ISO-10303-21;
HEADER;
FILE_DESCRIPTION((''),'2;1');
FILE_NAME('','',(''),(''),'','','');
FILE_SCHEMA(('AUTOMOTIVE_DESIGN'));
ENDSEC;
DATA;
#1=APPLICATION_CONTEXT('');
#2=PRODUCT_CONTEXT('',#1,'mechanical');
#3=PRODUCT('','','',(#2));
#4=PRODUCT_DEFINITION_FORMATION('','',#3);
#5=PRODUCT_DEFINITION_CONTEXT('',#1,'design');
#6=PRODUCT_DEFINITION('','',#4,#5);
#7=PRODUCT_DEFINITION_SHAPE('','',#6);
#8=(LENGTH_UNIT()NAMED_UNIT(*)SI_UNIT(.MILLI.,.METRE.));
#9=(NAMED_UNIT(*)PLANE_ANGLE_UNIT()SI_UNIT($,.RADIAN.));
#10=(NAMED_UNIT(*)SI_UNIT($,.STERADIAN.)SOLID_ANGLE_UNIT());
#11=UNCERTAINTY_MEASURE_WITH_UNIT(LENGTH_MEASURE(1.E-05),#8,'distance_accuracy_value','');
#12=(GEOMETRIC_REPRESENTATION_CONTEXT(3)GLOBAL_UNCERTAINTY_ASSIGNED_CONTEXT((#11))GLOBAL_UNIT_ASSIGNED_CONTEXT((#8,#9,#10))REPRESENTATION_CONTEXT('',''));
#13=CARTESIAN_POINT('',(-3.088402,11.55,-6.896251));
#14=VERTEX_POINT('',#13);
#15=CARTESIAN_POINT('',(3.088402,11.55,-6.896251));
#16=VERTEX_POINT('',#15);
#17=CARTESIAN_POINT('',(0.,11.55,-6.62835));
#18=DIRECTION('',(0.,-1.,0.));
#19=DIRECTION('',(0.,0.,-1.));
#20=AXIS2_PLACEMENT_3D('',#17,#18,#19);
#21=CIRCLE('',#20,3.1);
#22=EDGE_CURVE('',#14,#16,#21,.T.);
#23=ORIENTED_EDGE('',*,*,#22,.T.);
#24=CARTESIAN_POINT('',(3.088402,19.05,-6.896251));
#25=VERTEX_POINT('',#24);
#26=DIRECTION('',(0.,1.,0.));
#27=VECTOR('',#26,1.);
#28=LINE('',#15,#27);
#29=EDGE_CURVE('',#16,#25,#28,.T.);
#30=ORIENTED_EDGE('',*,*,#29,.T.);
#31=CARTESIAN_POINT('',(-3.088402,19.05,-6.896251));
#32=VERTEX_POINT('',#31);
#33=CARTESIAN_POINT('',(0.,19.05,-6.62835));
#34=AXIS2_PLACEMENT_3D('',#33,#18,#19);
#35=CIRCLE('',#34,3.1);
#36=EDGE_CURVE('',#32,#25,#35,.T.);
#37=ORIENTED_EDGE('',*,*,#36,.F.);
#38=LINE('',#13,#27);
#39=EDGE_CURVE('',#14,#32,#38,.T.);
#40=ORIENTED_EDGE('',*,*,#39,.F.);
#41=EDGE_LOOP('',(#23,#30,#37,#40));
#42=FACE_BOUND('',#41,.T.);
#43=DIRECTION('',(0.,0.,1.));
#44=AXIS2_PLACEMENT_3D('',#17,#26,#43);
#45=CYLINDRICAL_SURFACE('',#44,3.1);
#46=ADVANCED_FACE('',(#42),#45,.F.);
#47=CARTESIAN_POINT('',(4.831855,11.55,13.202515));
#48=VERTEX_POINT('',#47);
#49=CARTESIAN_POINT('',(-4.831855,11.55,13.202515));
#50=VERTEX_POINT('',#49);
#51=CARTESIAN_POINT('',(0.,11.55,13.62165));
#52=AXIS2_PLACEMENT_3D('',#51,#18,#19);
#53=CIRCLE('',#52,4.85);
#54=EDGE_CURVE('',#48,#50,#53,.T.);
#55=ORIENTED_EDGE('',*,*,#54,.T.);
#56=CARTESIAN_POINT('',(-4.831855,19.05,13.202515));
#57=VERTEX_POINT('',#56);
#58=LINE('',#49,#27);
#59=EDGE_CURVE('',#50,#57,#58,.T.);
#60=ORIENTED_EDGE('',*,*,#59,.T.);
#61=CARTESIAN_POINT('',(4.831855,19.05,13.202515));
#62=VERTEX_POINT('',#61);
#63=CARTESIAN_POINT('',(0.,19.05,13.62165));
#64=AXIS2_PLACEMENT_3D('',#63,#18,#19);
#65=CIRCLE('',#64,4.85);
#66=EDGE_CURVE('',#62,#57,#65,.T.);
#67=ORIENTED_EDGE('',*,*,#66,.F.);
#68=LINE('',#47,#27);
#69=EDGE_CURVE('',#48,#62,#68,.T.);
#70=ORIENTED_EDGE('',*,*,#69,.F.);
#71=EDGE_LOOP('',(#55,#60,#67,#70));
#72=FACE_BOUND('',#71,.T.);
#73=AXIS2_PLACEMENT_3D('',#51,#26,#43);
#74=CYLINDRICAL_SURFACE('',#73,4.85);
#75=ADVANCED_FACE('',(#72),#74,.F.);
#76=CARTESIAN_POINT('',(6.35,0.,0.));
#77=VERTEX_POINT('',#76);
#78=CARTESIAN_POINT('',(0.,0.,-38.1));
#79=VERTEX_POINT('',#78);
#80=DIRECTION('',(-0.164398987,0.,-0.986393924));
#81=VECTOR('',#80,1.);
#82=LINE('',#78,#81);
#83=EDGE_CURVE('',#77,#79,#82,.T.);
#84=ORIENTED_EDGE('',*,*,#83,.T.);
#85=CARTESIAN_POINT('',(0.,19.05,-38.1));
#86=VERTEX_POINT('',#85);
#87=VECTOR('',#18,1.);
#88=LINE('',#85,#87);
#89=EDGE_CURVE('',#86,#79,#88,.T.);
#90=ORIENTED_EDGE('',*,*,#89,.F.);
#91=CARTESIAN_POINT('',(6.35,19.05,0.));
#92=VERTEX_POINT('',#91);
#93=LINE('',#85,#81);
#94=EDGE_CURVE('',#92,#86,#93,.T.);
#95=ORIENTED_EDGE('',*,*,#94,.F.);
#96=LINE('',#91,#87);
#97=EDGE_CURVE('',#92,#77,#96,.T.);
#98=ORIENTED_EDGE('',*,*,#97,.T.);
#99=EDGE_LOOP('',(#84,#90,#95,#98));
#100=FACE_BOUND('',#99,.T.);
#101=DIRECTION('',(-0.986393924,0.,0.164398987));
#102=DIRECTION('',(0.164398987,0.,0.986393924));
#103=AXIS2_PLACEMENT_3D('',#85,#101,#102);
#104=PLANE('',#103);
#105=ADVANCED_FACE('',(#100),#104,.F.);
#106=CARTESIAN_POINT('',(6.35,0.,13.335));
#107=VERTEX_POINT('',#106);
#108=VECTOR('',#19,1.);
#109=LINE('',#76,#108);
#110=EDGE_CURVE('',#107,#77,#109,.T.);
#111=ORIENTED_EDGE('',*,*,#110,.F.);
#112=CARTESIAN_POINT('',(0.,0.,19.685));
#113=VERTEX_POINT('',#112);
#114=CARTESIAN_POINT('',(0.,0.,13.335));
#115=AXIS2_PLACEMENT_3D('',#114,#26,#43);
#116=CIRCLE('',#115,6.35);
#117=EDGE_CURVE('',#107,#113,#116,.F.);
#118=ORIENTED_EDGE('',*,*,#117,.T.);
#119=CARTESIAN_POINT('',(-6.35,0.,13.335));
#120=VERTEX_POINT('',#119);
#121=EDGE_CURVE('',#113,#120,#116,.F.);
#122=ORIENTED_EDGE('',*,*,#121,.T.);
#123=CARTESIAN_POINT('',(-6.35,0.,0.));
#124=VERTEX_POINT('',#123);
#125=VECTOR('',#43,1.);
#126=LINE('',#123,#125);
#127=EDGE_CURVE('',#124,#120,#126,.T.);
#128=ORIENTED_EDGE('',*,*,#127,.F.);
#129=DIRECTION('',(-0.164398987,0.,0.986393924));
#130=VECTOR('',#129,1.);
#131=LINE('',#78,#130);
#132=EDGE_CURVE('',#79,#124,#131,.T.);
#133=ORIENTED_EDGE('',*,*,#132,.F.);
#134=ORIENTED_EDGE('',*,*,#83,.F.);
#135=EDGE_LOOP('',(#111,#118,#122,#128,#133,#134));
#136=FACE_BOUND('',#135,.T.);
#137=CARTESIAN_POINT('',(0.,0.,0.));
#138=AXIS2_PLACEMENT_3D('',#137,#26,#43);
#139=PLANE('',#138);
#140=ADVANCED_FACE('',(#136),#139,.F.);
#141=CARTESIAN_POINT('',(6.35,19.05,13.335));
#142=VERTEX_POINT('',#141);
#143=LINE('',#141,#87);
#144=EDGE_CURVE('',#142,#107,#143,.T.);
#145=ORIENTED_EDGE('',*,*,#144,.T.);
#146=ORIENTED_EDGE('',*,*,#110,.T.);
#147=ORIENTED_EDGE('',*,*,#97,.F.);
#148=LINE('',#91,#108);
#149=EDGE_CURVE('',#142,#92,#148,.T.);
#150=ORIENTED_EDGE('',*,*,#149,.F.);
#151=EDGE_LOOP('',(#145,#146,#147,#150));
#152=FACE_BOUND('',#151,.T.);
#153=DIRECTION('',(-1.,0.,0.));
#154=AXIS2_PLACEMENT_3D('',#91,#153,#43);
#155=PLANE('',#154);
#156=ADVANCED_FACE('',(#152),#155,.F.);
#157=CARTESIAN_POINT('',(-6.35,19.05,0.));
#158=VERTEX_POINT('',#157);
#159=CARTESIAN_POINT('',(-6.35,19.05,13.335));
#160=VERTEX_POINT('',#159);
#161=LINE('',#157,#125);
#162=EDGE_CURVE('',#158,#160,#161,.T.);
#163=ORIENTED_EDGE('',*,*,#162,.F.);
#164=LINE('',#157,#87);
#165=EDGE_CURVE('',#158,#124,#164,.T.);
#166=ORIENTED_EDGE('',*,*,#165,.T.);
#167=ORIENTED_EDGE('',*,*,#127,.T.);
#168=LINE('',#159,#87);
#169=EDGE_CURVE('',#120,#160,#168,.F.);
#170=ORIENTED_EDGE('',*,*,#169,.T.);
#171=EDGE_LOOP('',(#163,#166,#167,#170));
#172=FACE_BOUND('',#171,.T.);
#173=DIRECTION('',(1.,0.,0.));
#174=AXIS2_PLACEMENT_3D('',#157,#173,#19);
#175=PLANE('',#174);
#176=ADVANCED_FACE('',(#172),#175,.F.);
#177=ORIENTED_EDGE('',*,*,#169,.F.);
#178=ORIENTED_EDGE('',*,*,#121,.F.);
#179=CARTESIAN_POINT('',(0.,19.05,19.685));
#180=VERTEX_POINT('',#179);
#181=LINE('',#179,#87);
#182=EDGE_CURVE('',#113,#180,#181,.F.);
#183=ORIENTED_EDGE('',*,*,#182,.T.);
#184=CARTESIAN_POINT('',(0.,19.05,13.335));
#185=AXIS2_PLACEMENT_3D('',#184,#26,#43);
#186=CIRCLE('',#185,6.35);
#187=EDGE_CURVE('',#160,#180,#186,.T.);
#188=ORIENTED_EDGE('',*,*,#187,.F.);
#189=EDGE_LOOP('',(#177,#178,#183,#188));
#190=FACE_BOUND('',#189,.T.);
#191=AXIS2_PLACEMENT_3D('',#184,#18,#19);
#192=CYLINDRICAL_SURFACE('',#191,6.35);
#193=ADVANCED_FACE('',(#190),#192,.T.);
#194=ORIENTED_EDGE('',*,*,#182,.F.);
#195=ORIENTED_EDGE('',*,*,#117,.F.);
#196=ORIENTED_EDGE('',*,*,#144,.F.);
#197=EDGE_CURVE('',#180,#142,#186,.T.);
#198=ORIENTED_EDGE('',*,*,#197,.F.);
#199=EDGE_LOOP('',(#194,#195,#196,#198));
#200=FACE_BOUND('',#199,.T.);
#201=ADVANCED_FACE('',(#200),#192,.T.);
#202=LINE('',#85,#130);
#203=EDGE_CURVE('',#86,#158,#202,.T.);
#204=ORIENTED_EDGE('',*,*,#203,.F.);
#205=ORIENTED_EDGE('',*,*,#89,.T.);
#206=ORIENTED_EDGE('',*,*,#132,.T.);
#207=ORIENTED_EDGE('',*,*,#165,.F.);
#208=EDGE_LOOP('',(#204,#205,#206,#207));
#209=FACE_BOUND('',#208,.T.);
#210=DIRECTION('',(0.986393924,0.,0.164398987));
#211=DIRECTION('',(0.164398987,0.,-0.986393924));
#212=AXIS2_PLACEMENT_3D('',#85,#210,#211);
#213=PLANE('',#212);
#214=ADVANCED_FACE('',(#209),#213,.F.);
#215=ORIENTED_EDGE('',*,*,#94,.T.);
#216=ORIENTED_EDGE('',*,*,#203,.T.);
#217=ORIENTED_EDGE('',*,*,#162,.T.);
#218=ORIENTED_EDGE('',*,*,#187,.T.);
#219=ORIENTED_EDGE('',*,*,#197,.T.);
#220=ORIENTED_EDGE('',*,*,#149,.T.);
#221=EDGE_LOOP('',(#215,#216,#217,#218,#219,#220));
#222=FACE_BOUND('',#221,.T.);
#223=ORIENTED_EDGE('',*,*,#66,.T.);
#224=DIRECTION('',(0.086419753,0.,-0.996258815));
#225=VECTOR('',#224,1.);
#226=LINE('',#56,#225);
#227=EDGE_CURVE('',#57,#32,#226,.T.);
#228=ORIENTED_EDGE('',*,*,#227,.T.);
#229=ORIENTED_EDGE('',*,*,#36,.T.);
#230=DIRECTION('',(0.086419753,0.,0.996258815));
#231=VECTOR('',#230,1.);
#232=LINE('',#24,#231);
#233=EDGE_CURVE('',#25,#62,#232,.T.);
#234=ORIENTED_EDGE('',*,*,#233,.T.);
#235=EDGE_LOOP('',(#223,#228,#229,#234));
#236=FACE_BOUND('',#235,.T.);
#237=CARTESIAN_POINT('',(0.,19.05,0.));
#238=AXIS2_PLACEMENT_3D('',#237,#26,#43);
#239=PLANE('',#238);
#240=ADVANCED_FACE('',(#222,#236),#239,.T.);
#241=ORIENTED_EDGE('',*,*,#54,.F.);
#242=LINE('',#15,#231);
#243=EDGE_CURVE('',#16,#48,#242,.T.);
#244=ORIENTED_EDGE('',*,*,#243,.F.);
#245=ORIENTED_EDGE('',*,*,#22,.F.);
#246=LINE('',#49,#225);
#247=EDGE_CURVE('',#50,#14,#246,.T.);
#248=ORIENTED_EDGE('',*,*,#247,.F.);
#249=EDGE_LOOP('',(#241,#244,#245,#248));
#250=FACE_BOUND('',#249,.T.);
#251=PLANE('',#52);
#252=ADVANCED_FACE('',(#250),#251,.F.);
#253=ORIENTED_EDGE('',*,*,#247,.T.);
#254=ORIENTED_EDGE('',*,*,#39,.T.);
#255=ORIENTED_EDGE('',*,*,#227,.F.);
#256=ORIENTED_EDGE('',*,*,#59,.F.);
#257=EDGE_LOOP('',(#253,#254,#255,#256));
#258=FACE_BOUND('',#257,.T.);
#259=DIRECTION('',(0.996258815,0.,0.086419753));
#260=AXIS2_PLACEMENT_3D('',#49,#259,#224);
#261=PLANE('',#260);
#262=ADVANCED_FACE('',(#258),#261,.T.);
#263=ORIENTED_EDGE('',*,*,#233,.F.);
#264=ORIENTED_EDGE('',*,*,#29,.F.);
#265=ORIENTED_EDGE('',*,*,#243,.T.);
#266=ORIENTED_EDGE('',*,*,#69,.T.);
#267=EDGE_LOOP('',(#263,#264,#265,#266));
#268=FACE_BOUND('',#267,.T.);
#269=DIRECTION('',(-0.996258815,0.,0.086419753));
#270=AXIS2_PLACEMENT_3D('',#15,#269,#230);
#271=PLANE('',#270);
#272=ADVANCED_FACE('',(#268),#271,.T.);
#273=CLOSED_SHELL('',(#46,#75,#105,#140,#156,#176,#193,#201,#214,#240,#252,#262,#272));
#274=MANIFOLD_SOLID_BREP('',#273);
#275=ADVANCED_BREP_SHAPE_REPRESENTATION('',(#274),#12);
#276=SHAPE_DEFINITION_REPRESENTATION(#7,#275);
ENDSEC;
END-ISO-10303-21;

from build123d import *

# Parameters (mm, degrees)
BOSS_EXTRUDE1_DEPTH = 19.05
FILLET1_R           = 6.35
CUT_EXTRUDE1_DEPTH  = 7.5


with BuildPart() as part:
    # Sketch1 → Boss-Extrude1 (new body)
    with BuildSketch(Plane(origin=(0, 0, 0), x_dir=(1, 0, 0), z_dir=(0, 1, 0))):
        Polygon((0, 38.1), (-6.35, 0), (-6.35, -19.685), (6.35, -19.685), (6.35, 0), align=None)
    extrude(amount=BOSS_EXTRUDE1_DEPTH)

    # Fillet1
    fillet1_edges = [part.edges().sort_by_distance(p)[0] for p in [
        (-6.35, 9.525, 19.685),
        (6.35, 9.525, 19.685),
    ]]
    fillet(fillet1_edges, radius=FILLET1_R - 0.0001)  # a hair under: the kernel refuses the full size

    # Sketch4 → Cut-Extrude1 (cut)
    with BuildSketch(Plane(origin=(0, 19.05, 0), x_dir=(1, 0, 0), z_dir=(0, 1, 0))):
        with BuildLine():
            Line((-4.831855252, -13.202514523), (-3.088402326, 6.896250909))
            ThreePointArc((-3.088402326, 6.896250909), (0, 9.728349675), (3.088402326, 6.896250909))
            Line((3.088402326, 6.896250909), (4.831855252, -13.202514523))
            ThreePointArc((4.831855252, -13.202514523), (0, -18.471650325), (-4.831855252, -13.202514523))
        make_face()
    extrude(amount=-CUT_EXTRUDE1_DEPTH, mode=Mode.SUBTRACT)


solid = part.part
